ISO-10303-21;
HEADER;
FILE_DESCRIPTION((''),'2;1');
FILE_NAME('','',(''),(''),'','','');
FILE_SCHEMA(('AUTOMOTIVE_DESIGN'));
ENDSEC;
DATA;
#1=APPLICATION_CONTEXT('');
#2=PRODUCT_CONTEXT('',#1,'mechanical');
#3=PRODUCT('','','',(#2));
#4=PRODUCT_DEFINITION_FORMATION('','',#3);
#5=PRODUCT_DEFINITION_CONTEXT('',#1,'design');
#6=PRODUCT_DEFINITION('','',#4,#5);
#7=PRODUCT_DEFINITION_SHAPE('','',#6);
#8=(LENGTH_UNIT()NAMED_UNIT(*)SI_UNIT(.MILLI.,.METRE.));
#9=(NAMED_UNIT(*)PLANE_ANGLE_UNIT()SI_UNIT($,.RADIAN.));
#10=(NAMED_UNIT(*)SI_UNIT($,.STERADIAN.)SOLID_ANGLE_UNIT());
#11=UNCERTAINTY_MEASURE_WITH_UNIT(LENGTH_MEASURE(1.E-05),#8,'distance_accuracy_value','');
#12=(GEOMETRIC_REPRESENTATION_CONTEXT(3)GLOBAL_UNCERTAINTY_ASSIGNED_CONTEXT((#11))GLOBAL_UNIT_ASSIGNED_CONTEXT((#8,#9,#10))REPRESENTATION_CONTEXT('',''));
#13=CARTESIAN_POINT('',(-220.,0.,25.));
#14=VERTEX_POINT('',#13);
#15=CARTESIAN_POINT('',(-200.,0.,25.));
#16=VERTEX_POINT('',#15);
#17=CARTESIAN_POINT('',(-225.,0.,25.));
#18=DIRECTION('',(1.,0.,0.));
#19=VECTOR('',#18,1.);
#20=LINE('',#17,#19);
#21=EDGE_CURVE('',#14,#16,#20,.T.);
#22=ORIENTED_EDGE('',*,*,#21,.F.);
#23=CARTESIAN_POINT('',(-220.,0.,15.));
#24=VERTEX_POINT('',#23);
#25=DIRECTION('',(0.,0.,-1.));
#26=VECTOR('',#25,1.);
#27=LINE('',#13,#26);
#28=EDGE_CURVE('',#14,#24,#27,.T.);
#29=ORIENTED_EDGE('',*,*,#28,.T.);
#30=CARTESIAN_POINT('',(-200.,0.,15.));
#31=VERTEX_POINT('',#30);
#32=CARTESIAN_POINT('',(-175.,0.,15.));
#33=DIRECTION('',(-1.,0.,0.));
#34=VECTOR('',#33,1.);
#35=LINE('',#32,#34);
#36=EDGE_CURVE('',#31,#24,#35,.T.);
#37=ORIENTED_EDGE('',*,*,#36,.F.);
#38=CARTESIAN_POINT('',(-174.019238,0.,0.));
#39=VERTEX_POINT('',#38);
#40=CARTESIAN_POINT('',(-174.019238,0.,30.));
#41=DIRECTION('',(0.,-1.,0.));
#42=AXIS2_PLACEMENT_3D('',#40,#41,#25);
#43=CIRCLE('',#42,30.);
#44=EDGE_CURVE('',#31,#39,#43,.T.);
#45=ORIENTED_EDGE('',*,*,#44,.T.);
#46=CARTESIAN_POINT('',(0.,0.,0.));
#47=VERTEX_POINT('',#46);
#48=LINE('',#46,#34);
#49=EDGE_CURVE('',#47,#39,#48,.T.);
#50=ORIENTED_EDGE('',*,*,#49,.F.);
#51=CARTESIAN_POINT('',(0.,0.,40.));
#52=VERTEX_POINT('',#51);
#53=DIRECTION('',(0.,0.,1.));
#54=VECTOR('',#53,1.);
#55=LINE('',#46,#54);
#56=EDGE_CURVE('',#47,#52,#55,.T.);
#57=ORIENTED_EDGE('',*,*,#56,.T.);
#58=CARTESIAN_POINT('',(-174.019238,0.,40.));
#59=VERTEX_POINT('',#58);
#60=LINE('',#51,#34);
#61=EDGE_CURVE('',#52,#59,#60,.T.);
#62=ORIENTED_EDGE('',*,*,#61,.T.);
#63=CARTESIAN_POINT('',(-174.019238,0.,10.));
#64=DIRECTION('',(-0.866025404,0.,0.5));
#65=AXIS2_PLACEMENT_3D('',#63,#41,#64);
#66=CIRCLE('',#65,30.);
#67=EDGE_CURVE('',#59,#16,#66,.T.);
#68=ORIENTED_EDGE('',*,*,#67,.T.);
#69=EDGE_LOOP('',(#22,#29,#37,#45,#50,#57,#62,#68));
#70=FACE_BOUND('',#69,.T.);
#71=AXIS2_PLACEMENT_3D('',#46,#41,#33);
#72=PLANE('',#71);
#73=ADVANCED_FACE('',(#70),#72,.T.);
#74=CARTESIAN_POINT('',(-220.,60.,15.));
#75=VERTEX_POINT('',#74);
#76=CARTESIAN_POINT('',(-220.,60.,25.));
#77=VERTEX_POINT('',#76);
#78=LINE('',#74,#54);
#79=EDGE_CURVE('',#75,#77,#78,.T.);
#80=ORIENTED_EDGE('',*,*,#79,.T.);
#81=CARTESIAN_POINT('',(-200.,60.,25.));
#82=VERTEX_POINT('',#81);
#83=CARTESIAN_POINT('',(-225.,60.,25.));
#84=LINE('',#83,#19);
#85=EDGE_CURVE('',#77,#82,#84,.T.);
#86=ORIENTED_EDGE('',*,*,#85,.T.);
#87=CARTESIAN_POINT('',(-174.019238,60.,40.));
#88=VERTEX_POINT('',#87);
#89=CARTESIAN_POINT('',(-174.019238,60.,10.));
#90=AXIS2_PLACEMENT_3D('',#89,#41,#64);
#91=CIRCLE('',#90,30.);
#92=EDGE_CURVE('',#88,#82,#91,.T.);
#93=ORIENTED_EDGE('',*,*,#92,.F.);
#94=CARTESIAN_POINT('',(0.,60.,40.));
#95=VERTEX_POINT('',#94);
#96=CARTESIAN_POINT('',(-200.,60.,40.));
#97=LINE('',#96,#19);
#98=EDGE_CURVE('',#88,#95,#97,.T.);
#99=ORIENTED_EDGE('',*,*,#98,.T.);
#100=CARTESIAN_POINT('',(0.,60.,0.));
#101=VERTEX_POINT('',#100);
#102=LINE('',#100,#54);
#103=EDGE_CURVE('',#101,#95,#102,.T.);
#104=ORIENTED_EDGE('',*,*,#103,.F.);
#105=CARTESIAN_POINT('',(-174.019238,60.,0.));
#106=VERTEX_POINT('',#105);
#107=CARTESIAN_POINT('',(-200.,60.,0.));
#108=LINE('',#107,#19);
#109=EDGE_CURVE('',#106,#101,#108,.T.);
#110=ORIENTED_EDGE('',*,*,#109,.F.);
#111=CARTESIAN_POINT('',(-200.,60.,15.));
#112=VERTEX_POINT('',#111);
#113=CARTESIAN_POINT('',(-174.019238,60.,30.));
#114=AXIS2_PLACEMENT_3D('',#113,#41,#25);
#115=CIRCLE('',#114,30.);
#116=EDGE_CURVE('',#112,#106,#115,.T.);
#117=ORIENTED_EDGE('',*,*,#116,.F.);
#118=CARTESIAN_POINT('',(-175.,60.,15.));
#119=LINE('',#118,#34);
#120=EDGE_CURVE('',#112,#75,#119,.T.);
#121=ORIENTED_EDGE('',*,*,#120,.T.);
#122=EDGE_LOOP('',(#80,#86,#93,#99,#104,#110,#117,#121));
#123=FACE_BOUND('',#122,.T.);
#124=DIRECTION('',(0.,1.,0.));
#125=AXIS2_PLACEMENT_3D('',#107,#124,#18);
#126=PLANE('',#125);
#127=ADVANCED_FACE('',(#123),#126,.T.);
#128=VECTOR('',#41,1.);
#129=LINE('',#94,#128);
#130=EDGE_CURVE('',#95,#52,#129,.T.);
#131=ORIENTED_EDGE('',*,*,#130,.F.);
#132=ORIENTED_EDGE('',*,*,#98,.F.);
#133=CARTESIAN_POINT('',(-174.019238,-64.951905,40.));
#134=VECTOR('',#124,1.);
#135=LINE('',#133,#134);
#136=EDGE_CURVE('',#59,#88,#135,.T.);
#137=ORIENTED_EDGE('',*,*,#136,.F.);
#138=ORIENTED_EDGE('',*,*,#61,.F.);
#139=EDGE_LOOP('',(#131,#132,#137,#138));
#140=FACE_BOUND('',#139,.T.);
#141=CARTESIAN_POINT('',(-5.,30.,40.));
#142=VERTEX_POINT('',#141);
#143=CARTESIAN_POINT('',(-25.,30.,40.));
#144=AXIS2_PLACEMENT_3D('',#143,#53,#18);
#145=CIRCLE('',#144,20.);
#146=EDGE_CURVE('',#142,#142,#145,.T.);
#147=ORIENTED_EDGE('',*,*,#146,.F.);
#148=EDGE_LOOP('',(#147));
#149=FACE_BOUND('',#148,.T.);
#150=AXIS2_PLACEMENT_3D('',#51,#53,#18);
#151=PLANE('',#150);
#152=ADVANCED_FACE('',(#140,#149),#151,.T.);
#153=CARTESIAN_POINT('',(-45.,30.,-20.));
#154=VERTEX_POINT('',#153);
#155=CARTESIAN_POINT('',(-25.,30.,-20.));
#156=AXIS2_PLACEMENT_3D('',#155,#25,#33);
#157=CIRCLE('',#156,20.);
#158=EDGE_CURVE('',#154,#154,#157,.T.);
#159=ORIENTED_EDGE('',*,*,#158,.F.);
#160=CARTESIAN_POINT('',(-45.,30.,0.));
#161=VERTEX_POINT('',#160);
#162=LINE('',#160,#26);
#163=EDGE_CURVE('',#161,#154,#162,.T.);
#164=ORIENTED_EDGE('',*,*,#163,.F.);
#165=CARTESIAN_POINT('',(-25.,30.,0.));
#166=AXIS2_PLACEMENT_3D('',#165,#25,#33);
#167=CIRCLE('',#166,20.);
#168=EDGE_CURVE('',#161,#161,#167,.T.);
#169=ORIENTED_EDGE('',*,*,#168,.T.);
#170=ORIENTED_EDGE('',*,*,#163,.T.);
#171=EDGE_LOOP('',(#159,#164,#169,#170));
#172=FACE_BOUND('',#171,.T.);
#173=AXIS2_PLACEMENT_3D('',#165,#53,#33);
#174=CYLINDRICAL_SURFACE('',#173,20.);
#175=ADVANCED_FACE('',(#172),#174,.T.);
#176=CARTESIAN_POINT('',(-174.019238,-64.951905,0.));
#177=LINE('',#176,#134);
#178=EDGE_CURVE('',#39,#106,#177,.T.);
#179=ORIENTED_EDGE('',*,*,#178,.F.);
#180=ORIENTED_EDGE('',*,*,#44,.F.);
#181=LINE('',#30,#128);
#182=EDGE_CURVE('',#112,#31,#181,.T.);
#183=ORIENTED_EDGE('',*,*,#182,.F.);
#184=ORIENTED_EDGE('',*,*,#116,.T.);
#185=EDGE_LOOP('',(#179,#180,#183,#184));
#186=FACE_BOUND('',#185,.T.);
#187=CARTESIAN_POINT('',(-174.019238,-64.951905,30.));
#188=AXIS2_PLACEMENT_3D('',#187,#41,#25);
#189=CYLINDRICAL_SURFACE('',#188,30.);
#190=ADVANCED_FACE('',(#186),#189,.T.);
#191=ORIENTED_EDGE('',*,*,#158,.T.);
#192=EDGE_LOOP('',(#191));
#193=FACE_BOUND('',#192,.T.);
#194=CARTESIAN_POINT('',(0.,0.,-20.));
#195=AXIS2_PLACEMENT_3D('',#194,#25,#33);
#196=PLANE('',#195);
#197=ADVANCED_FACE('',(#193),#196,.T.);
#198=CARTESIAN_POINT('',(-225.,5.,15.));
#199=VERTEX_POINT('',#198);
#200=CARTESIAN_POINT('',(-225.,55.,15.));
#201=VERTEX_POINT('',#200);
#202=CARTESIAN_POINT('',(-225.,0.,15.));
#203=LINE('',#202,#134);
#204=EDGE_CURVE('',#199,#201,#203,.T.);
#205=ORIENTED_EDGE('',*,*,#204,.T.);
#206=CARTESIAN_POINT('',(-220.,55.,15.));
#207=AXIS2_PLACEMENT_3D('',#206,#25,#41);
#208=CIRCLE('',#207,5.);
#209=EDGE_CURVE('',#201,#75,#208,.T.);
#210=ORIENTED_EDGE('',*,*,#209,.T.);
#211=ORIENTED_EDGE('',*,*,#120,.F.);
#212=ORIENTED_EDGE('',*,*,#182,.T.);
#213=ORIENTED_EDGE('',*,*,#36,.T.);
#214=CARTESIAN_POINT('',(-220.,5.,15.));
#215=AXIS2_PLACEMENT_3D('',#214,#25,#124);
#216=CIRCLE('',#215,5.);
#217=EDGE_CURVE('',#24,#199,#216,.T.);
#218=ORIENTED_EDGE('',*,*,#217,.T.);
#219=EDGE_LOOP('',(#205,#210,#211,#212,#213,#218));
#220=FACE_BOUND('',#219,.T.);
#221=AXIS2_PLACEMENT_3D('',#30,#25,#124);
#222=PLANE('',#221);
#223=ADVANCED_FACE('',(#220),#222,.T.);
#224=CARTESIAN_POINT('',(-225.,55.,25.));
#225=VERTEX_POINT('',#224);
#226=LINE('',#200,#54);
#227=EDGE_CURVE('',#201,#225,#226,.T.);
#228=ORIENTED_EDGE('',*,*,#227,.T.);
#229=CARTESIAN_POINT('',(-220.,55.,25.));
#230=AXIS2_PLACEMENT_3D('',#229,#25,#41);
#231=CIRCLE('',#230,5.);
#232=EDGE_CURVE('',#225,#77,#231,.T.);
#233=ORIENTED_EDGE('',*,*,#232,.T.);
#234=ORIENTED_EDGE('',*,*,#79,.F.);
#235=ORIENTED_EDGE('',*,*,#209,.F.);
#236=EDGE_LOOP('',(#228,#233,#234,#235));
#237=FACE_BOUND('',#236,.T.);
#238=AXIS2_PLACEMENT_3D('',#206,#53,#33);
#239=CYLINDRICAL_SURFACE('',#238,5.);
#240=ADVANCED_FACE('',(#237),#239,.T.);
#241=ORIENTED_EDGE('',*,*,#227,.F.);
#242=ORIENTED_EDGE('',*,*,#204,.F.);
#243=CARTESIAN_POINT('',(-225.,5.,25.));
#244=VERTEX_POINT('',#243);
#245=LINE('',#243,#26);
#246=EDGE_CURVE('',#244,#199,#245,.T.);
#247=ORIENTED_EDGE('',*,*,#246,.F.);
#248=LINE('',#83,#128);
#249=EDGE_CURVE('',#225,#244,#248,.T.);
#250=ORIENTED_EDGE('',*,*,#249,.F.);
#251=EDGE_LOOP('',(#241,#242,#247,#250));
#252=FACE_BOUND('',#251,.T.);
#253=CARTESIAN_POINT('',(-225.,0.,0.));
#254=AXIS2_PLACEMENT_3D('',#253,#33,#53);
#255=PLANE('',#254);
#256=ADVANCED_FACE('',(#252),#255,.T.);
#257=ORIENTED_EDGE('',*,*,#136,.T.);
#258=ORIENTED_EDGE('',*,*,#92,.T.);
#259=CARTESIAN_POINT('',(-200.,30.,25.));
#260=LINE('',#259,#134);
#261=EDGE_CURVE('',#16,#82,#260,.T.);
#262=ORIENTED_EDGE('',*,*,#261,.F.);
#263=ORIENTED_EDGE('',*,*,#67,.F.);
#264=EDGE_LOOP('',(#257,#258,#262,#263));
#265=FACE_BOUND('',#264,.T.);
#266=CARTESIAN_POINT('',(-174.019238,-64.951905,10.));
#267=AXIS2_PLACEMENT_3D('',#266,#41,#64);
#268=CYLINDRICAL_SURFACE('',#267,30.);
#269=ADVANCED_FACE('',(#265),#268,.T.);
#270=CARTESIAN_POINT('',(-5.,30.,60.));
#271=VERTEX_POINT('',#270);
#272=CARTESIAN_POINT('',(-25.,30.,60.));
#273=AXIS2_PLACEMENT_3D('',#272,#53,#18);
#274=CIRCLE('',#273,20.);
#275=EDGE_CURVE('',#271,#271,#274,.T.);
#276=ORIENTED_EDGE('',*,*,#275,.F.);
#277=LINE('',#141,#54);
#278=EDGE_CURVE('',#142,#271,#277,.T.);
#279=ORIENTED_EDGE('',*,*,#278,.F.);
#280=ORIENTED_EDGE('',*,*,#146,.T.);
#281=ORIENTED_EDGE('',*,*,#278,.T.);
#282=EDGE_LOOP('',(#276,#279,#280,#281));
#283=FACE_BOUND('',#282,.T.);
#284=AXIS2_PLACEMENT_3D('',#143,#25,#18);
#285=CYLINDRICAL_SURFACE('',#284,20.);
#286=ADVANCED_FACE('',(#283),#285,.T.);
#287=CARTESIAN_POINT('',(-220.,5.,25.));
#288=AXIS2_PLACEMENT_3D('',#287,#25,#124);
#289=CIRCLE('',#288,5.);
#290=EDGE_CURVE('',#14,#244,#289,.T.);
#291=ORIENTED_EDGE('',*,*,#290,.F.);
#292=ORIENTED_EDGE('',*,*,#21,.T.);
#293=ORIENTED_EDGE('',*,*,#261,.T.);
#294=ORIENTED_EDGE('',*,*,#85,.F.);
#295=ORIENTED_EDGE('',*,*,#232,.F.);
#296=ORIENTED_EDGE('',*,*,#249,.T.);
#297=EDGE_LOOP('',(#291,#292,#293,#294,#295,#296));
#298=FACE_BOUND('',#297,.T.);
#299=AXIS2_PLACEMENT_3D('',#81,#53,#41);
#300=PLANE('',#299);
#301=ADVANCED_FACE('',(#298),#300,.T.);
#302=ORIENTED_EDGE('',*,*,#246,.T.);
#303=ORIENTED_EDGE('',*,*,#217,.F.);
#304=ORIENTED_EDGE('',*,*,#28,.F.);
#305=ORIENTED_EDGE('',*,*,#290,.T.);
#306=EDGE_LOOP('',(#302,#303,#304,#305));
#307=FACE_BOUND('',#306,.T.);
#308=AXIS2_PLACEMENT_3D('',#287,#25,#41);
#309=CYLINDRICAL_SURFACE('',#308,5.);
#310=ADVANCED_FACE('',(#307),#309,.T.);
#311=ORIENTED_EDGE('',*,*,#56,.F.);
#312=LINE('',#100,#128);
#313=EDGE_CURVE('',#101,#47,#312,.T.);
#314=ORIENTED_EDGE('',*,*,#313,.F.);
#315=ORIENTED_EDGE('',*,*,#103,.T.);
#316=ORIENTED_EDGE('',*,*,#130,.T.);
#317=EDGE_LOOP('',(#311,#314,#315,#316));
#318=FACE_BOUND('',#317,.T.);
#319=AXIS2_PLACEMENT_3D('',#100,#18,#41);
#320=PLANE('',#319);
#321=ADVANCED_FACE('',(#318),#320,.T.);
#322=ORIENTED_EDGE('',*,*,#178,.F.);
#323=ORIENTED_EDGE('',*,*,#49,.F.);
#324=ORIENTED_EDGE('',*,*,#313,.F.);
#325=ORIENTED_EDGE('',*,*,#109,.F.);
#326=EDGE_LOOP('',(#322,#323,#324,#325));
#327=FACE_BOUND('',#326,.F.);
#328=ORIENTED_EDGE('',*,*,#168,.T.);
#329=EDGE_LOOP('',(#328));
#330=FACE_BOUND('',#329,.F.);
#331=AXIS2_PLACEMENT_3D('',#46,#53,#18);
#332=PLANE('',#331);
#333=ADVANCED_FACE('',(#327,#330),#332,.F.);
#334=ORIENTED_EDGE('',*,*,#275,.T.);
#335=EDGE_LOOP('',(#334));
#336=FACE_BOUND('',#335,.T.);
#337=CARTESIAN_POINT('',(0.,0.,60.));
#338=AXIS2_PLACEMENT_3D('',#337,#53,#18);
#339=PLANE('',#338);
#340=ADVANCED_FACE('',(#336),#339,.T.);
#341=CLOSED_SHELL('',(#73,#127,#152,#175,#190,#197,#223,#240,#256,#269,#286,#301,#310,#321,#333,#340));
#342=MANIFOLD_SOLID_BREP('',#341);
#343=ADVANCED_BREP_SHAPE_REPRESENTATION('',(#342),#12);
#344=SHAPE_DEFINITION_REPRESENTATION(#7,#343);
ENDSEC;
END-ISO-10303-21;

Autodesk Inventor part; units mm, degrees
ref_plane "YZ Plane" through (0, 0, 0) normal (1, 0, 0) x (0, 1, 0)
ref_plane "XZ Plane" through (0, 0, 0) normal (0, 1, 0) x (-1, 0, 0)
ref_plane "XY Plane" through (0, 0, 0) normal (0, 0, 1) x (1, 0, 0)
sketch "Sketch1" plane through (0, 0, 0) normal (0, 0, 1) x (1, 0, 0)
  line L0 (0, 0) -> (-200, 0)
  line L1 (-200, 0) -> (-200, 60)
  line L2 (-200, 60) -> (0, 60)
  line L3 (0, 60) -> (0, 0)
  dimension "d0" = 200
  dimension "d1" = 60
extrude "Extrusion1" add sketch "Sketch1" along normal blind 40
sketch "Sketch2" plane through (0, 0, 40) normal (0, 0, 1) x (1, 0, 0)
  circle A0 centre (-25, 30) radius 20
  line L0 (0, 60) -> (-200, 60) projected
  line L1 (0, 0) -> (0, 60) projected
  dimension "d4" = 40
  dimension "d5" = 30
  dimension "d6" = 25
extrude "Extrusion2" add sketch "Sketch2" along normal mid plane 40
sketch "Sketch3" plane through (0, 0, 0) normal (0, 0, -1) x (-1, 0, 0)
  circle A0 centre (25, 30) radius 20 projected
  circle A1 centre (25, 30) radius 20
  point P0 (0, 0)
extrude "Extrusion3" add sketch "Sketch3" along normal mid plane 40
sketch "Sketch4" plane through (-200, 0, 0) normal (-1, 0, 0) x (0, 0, 1)
  line L0 (0, 60) -> (40, 60) projected
  line L1 (25, 0) -> (15, 0)
  line L2 (15, 0) -> (15, 60)
  line L3 (15, 60) -> (25, 60)
  line L4 (25, 60) -> (25, 0)
  line L5 (0, 60) -> (0, 0) projected
  line L6 (40, 60) -> (40, 0) projected
  dimension "d11" = 10
  dimension "d12" = 60
  dimension "d13" = 15
  dimension "d14" = 15
  dimension "d15" = 60
extrude "Extrusion4" add sketch "Sketch4" along normal mid plane 50
fillet "Fillet1" radius 30 2 edges at (-200, 30, 0) (-200, 30, 40)
fillet "Fillet2" radius 5 2 edges at (-225, 60, 20) (-225, 0, 20)
properties part number "Part4final"
